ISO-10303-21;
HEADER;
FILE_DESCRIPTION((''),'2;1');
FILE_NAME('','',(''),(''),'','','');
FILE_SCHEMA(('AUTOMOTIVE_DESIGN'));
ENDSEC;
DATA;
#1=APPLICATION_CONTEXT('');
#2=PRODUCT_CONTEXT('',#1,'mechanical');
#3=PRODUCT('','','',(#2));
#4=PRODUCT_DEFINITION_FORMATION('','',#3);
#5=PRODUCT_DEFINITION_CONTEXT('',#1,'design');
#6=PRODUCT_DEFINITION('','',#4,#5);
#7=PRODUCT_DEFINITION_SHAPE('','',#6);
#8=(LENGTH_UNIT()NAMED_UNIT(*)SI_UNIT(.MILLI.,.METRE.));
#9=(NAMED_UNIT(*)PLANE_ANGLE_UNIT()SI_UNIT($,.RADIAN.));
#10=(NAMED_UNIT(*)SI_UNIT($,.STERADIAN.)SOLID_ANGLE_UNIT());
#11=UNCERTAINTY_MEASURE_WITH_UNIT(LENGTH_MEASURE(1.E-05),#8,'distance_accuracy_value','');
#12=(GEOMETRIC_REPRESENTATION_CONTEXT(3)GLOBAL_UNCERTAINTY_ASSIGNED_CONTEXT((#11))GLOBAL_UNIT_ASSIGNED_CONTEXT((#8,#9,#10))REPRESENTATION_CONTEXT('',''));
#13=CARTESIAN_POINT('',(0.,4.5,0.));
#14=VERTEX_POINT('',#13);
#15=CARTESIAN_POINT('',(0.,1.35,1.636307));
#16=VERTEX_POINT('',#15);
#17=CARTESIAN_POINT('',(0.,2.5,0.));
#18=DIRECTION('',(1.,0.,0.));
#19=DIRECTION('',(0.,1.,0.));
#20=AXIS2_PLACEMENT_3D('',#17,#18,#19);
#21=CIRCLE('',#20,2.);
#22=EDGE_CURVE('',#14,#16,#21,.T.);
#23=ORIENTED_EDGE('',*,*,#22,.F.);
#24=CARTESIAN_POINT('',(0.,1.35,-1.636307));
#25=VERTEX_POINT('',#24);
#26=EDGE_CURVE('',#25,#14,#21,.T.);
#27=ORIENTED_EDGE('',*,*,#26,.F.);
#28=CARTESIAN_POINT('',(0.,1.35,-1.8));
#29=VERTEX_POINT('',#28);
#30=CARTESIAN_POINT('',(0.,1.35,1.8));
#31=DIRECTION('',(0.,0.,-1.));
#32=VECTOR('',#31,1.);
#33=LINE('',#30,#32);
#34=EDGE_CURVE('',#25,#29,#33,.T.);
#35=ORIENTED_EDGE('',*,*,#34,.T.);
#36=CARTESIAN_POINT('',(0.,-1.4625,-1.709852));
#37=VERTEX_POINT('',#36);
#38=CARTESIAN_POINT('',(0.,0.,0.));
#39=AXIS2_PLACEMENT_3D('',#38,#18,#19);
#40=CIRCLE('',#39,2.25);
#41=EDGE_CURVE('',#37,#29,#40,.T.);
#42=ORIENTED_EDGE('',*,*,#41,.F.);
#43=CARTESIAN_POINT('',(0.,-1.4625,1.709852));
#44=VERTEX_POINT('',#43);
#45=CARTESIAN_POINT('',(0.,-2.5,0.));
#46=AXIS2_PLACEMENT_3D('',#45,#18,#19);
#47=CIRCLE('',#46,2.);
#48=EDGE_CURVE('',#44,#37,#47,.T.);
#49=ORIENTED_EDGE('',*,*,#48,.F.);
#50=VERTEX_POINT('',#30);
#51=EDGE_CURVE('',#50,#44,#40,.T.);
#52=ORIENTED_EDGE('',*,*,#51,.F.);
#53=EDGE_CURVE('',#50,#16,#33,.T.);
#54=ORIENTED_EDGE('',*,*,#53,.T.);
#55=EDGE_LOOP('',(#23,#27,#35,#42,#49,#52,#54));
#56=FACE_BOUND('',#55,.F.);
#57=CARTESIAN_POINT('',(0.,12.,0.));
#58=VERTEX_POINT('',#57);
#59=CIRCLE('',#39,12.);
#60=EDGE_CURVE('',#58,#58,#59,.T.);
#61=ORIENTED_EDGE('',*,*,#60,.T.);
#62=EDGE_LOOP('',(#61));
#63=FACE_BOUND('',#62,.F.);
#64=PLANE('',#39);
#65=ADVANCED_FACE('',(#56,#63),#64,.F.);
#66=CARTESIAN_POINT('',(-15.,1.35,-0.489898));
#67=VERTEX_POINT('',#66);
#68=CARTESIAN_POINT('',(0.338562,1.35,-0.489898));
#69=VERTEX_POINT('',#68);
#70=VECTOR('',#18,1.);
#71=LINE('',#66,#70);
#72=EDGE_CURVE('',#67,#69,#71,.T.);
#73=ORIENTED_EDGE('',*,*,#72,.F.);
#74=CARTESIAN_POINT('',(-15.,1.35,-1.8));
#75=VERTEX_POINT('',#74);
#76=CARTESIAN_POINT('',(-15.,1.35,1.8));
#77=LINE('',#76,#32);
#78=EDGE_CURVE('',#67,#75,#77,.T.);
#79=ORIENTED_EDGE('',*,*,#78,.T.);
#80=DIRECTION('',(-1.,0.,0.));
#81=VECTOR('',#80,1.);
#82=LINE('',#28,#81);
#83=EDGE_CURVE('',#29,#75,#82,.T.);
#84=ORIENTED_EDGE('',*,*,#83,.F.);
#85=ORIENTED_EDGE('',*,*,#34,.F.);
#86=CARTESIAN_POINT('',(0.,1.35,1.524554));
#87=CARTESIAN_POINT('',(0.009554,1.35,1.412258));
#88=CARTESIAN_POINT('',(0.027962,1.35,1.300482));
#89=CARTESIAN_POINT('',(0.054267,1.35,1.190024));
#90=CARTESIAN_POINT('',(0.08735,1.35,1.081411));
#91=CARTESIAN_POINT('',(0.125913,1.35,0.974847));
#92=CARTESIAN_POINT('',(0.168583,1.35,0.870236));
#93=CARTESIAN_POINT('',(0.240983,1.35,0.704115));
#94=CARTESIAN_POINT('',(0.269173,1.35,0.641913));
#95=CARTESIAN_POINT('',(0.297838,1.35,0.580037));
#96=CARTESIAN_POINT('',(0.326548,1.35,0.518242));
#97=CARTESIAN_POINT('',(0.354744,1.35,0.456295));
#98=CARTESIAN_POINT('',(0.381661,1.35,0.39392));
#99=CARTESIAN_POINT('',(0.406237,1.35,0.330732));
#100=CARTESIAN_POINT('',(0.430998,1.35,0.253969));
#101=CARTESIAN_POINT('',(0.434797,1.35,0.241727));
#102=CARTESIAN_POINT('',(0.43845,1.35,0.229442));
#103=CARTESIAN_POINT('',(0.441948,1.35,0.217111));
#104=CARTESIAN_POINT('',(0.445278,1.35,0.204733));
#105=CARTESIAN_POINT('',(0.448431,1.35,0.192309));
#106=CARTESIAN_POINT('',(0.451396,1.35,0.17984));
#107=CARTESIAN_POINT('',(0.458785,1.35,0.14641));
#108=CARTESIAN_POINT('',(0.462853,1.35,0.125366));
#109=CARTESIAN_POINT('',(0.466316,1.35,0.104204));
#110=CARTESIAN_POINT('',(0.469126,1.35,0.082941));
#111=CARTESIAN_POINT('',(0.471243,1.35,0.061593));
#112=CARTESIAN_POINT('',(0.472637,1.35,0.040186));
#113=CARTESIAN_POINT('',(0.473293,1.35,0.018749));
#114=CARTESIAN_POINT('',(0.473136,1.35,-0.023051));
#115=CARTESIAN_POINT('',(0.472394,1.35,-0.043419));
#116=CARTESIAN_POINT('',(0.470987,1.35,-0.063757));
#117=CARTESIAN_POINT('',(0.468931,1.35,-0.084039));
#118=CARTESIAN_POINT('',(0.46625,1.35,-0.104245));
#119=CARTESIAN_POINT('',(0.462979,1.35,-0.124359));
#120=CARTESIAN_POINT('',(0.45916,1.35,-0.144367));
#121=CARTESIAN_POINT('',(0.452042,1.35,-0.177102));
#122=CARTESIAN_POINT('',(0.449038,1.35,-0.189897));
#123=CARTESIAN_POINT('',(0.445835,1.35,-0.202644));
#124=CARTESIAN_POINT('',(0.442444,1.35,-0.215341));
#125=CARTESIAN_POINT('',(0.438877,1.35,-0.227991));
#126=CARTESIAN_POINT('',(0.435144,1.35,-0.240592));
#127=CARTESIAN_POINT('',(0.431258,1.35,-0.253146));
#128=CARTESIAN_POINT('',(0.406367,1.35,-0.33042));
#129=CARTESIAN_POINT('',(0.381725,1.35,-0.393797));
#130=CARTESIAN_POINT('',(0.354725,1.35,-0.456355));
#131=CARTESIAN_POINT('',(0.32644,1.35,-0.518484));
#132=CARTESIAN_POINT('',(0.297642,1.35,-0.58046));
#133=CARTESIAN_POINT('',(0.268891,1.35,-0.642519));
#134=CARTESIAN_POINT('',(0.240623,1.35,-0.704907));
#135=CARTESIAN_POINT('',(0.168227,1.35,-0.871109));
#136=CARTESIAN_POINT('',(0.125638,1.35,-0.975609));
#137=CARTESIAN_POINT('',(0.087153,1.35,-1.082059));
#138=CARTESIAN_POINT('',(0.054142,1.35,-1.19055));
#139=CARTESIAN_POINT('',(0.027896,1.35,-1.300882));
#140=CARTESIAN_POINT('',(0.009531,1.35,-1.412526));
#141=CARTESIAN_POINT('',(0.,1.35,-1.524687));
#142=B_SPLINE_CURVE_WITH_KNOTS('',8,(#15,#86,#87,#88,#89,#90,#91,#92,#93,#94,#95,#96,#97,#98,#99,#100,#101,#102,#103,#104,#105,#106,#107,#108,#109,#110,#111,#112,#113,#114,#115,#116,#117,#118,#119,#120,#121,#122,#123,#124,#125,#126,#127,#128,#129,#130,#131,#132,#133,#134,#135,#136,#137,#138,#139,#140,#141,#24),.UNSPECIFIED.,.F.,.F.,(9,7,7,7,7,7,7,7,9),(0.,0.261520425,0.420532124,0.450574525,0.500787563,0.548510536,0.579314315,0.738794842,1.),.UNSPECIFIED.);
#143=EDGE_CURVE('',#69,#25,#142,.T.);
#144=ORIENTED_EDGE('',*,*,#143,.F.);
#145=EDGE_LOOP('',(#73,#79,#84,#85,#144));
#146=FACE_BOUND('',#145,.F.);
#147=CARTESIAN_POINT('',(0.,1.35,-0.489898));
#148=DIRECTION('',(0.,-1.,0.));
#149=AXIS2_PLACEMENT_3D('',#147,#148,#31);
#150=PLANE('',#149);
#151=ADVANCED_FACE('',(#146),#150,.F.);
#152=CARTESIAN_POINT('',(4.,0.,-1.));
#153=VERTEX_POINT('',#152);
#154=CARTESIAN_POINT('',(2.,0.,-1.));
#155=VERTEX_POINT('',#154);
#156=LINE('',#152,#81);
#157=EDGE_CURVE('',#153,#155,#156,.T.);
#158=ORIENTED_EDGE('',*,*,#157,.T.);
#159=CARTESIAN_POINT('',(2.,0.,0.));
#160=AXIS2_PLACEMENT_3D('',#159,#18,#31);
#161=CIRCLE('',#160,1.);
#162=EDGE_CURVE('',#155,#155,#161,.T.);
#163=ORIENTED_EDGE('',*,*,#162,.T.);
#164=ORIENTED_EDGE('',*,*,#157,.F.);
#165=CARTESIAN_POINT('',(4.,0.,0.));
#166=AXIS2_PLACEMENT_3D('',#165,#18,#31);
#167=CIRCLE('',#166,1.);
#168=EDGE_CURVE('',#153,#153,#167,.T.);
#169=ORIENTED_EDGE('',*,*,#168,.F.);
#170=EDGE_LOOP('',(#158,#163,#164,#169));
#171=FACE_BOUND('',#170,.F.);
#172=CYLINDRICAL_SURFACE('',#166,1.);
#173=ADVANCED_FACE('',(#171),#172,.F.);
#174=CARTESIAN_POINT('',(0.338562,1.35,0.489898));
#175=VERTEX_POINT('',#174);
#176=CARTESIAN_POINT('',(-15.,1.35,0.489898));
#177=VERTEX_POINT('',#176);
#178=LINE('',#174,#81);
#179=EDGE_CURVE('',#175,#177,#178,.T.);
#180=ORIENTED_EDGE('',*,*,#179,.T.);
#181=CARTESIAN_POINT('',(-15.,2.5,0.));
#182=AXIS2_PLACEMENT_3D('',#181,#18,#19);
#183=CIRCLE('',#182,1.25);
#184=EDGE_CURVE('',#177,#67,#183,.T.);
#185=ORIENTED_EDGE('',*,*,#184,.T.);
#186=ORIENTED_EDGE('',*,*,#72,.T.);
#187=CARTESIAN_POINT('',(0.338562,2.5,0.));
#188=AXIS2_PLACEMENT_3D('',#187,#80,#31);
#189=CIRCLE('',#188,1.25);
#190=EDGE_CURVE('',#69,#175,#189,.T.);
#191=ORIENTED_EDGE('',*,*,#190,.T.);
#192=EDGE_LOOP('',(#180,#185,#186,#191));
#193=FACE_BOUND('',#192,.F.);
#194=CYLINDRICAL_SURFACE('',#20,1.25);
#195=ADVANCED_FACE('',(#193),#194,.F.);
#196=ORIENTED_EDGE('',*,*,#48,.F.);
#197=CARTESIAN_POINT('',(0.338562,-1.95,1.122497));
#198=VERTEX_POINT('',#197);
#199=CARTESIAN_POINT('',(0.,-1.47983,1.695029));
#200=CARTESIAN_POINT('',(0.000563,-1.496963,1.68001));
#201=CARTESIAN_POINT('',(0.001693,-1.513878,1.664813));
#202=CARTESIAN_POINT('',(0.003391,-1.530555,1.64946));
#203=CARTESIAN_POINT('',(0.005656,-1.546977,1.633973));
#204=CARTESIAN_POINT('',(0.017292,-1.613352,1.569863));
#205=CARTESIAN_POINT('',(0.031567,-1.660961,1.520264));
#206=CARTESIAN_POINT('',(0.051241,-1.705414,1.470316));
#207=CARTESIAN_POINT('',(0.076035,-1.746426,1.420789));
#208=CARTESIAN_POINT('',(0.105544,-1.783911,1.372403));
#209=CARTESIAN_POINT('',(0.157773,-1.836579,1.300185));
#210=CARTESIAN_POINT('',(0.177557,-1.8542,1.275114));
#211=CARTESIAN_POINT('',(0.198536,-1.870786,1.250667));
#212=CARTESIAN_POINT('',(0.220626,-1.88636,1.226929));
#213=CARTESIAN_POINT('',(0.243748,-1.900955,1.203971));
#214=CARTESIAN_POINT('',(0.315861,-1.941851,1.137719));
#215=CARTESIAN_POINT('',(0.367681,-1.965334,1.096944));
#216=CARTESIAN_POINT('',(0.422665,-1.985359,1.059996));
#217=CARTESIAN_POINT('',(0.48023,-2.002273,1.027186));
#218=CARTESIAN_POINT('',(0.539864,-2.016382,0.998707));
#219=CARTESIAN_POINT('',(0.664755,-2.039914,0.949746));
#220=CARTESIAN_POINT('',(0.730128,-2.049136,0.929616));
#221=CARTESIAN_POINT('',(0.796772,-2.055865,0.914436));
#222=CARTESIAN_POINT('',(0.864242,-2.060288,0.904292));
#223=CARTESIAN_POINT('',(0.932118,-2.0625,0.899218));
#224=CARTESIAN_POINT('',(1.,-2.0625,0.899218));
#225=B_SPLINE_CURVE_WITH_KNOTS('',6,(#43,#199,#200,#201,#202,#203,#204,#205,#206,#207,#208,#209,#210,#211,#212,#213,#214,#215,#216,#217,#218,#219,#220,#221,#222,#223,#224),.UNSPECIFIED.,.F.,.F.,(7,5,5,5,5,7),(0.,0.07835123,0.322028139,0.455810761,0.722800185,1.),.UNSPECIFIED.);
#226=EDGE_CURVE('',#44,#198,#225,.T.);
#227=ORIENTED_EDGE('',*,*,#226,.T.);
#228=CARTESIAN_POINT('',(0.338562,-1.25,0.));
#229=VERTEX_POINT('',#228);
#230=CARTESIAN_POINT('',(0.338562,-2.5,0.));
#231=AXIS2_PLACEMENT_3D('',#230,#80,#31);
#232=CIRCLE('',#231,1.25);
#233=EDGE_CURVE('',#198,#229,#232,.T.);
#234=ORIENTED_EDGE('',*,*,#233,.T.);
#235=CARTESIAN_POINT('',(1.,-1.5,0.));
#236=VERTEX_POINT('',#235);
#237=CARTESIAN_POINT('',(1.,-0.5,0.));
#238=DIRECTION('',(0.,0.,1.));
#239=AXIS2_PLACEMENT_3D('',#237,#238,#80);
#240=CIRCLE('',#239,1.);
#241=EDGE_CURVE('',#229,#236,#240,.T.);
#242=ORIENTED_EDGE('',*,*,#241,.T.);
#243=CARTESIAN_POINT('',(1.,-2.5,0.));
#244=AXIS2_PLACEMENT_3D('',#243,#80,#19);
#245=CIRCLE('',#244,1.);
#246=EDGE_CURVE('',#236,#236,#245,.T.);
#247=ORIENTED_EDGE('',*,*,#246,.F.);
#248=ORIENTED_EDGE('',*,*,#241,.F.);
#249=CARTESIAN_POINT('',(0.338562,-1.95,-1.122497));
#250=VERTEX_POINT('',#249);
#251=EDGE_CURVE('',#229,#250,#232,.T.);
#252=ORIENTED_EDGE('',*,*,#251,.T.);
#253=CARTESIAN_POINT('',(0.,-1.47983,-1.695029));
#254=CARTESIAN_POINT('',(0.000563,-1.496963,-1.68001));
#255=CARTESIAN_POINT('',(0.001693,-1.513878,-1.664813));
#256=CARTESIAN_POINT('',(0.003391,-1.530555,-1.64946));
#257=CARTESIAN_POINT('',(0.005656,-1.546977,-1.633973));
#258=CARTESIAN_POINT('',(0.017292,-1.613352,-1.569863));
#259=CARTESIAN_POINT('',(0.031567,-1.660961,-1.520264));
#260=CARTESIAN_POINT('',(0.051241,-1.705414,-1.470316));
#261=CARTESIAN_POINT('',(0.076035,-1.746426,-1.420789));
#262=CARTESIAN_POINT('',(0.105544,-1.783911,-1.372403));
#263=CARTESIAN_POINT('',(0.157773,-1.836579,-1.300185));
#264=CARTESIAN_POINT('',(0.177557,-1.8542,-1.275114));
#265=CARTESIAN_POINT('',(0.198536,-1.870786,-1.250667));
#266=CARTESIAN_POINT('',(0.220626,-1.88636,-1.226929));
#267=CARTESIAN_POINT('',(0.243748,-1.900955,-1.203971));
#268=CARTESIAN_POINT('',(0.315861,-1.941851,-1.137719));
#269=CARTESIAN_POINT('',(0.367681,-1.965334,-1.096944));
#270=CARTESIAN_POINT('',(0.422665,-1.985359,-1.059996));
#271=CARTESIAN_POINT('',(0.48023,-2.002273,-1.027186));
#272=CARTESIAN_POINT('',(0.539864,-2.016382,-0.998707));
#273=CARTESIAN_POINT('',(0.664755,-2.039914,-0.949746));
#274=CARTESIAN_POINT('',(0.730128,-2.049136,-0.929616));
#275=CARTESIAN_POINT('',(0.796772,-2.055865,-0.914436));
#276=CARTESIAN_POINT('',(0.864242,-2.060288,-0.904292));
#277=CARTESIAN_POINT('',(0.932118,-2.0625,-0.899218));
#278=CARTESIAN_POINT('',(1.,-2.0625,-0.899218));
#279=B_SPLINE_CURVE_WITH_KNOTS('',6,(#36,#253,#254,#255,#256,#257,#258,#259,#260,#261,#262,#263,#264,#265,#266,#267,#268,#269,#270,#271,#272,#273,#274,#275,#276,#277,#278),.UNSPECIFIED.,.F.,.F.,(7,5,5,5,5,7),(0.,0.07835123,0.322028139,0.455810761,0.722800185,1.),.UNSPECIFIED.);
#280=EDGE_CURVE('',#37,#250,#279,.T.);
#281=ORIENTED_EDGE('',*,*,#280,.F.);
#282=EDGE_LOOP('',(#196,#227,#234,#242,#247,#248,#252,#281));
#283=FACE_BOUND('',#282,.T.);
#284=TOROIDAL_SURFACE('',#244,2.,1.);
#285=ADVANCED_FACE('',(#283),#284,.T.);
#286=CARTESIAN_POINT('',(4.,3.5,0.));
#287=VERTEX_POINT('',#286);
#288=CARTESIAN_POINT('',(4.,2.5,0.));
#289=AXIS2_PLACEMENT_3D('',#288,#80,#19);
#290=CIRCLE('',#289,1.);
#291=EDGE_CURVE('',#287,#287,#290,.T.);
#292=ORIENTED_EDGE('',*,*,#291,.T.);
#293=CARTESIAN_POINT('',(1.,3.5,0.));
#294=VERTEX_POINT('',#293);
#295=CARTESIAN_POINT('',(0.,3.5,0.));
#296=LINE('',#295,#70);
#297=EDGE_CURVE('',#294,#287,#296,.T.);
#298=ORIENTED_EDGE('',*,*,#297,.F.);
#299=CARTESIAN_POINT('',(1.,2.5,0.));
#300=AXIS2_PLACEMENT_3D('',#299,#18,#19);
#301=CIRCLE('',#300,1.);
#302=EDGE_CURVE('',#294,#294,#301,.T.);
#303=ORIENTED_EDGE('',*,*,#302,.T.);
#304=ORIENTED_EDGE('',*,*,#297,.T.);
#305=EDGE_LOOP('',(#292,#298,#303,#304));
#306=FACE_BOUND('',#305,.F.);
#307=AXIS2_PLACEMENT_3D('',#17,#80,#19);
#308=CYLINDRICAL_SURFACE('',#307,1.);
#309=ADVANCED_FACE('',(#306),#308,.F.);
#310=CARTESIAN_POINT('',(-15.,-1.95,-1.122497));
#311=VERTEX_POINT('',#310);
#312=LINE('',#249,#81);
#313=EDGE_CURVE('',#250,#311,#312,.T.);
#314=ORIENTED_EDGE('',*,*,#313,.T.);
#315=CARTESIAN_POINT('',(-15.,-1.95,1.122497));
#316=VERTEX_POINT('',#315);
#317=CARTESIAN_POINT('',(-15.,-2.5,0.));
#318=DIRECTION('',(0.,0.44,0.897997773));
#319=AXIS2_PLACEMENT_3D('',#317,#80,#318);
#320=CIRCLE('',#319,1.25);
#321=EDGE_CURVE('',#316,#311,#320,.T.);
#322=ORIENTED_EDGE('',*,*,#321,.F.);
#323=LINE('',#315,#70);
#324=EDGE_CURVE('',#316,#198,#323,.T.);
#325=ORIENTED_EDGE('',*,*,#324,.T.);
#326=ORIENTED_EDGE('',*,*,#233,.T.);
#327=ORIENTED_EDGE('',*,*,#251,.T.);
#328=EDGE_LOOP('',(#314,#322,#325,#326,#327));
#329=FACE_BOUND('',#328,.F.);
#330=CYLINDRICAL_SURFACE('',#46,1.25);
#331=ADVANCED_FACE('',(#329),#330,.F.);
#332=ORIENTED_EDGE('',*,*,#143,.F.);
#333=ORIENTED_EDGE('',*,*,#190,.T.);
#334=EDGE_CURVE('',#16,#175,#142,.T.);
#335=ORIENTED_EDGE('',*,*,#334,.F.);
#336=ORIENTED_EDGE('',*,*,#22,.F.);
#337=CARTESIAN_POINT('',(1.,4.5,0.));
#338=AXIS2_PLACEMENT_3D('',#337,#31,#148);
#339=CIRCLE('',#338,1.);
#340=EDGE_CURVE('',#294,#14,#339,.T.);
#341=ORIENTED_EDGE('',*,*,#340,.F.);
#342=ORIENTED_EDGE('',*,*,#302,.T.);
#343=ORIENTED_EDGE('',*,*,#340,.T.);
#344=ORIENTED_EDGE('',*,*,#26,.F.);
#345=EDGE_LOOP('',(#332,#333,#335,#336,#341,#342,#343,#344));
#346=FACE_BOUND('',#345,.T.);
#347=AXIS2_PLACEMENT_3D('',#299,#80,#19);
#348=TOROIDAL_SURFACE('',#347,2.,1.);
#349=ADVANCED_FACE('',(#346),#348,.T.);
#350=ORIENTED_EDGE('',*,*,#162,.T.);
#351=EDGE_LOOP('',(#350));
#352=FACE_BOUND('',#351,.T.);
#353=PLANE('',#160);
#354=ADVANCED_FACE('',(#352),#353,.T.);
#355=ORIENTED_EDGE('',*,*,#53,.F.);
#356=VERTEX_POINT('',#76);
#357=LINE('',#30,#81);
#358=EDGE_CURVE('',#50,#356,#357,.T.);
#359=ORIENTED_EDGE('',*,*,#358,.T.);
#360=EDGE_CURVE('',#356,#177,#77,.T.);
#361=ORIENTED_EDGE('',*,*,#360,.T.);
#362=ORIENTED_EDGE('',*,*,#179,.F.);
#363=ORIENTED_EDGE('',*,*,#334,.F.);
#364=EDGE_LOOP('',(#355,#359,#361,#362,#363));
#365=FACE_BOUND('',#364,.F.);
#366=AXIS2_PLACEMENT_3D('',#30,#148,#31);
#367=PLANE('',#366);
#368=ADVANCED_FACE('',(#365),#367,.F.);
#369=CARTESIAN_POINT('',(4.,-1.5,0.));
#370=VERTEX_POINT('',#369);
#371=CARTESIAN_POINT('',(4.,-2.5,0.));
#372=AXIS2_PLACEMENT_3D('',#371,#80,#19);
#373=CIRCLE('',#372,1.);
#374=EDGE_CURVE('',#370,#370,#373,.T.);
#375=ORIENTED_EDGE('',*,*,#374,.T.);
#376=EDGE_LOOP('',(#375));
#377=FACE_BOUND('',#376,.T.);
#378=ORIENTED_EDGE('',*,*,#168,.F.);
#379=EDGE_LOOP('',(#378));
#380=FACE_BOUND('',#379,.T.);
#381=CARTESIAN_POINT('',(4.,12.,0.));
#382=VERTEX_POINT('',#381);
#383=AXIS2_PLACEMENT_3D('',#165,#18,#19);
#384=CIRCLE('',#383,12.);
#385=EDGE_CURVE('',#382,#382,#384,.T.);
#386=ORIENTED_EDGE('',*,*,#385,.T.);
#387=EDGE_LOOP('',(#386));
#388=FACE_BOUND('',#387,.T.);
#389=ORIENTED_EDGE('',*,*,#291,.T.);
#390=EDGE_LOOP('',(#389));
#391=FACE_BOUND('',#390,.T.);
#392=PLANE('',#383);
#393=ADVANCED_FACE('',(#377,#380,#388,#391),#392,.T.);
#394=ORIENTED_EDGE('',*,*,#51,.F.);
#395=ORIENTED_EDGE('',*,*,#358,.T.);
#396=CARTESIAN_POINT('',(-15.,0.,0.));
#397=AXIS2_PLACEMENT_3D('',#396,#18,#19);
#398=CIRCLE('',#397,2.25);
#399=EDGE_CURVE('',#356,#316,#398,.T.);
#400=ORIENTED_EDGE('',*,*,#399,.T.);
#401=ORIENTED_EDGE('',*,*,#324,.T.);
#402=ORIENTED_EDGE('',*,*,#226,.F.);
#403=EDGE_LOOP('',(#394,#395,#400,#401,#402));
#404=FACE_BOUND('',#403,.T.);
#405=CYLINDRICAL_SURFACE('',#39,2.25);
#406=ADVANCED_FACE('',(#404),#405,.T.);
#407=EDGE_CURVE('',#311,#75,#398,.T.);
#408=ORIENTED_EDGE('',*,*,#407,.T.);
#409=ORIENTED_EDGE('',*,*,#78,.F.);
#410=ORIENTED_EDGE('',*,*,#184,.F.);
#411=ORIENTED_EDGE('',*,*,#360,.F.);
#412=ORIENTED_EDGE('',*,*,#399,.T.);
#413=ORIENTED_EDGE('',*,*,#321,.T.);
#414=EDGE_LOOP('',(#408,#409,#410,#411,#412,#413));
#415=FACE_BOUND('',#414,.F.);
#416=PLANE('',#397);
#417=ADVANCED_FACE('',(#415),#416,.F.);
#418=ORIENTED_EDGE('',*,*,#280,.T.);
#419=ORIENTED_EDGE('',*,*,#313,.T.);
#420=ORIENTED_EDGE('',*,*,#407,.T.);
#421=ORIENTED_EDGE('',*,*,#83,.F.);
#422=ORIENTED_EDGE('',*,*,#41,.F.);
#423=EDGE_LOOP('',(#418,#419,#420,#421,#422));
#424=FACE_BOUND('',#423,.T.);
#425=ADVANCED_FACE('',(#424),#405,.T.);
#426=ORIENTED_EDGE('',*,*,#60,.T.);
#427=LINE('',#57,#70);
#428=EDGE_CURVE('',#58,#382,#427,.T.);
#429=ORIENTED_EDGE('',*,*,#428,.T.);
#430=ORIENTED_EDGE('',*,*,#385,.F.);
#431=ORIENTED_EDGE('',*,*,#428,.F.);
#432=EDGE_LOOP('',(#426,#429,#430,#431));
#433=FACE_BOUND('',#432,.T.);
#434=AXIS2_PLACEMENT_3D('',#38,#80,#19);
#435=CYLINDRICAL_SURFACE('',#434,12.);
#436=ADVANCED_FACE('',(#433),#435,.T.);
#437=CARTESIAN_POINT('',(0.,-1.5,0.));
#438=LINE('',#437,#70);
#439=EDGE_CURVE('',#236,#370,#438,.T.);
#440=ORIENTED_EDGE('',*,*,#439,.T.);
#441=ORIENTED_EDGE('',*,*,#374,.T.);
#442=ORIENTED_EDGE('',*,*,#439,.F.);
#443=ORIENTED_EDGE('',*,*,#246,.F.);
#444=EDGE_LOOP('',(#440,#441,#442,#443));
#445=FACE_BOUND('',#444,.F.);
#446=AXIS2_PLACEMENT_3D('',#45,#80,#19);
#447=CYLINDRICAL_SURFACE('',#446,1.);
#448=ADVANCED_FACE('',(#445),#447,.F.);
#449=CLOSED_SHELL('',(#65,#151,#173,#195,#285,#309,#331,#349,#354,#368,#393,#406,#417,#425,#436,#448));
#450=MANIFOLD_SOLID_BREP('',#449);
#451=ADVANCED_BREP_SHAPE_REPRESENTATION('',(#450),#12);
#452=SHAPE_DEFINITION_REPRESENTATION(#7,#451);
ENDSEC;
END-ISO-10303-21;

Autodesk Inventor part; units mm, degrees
ref_plane "YZ Plane" through (0, 0, 0) normal (1, 0, 0) x (0, 1, 0)
ref_plane "XZ Plane" through (0, 0, 0) normal (0, 1, 0) x (-1, 0, 0)
ref_plane "XY Plane" through (0, 0, 0) normal (0, 0, 1) x (1, 0, 0)
sketch "Sketch1" plane through (0, 0, 0) normal (1, 0, 0) x (0, 1, 0)
  circle A0 centre (0, 0) radius 12
  circle A1 centre (0, 0) radius 2.25
  line L0 (16, 0) -> (-16, 0) construction
  circle A2 centre (-2.5, 0) radius 1
  circle A3 centre (2.5, 0) radius 1
  line L1 (1.35, 1.8) -> (1.35, -1.8)
  circle A4 centre (2.5, 0) radius 1.25
  circle A5 centre (-2.5, 0) radius 1.25
  point P0 (-2.0625, 0.8992)
  point P1 (-2.0625, -0.8992)
  point P2 (-1.95, 1.1225)
  point P3 (-1.95, -1.1225)
  point P4 (1.35, -0.4899)
  point P5 (1.35, 0.4899)
  dimension "d0" = 24
  dimension "d1" = 4.5
  dimension "d2" = 2
  dimension "d3" = 2
  dimension "d9" = 2.5
  dimension "d10" = 2.5
extrude "Extrusion1" add sketch "Sketch1" along normal blind 4 contours A0 | A3 A1 A4 L1 | A1 A4 A3 | A4 L1 A1 | A1 L1 A4 | L1 A4 A1 A5 | L1 A4 | A5 A1 A2 | A1 A2 A5
extrude "Extrusion3" add sketch "Sketch1" against normal blind 15 contours L1 A4 A1 A5
fillet "Fillet2" radius 1 2 edges at (0, -3.5, 0) (0, 1.5, 0)
sketch "Sketch2" plane through (4, 0, 0) normal (1, 0, 0) x (0, 0, -1)
  circle A0 centre (0, 0) radius 1
  dimension "d15" = 2
extrude "Extrusion4" cut sketch "Sketch2" against normal blind 2
properties part number "engine_gear_connector"
